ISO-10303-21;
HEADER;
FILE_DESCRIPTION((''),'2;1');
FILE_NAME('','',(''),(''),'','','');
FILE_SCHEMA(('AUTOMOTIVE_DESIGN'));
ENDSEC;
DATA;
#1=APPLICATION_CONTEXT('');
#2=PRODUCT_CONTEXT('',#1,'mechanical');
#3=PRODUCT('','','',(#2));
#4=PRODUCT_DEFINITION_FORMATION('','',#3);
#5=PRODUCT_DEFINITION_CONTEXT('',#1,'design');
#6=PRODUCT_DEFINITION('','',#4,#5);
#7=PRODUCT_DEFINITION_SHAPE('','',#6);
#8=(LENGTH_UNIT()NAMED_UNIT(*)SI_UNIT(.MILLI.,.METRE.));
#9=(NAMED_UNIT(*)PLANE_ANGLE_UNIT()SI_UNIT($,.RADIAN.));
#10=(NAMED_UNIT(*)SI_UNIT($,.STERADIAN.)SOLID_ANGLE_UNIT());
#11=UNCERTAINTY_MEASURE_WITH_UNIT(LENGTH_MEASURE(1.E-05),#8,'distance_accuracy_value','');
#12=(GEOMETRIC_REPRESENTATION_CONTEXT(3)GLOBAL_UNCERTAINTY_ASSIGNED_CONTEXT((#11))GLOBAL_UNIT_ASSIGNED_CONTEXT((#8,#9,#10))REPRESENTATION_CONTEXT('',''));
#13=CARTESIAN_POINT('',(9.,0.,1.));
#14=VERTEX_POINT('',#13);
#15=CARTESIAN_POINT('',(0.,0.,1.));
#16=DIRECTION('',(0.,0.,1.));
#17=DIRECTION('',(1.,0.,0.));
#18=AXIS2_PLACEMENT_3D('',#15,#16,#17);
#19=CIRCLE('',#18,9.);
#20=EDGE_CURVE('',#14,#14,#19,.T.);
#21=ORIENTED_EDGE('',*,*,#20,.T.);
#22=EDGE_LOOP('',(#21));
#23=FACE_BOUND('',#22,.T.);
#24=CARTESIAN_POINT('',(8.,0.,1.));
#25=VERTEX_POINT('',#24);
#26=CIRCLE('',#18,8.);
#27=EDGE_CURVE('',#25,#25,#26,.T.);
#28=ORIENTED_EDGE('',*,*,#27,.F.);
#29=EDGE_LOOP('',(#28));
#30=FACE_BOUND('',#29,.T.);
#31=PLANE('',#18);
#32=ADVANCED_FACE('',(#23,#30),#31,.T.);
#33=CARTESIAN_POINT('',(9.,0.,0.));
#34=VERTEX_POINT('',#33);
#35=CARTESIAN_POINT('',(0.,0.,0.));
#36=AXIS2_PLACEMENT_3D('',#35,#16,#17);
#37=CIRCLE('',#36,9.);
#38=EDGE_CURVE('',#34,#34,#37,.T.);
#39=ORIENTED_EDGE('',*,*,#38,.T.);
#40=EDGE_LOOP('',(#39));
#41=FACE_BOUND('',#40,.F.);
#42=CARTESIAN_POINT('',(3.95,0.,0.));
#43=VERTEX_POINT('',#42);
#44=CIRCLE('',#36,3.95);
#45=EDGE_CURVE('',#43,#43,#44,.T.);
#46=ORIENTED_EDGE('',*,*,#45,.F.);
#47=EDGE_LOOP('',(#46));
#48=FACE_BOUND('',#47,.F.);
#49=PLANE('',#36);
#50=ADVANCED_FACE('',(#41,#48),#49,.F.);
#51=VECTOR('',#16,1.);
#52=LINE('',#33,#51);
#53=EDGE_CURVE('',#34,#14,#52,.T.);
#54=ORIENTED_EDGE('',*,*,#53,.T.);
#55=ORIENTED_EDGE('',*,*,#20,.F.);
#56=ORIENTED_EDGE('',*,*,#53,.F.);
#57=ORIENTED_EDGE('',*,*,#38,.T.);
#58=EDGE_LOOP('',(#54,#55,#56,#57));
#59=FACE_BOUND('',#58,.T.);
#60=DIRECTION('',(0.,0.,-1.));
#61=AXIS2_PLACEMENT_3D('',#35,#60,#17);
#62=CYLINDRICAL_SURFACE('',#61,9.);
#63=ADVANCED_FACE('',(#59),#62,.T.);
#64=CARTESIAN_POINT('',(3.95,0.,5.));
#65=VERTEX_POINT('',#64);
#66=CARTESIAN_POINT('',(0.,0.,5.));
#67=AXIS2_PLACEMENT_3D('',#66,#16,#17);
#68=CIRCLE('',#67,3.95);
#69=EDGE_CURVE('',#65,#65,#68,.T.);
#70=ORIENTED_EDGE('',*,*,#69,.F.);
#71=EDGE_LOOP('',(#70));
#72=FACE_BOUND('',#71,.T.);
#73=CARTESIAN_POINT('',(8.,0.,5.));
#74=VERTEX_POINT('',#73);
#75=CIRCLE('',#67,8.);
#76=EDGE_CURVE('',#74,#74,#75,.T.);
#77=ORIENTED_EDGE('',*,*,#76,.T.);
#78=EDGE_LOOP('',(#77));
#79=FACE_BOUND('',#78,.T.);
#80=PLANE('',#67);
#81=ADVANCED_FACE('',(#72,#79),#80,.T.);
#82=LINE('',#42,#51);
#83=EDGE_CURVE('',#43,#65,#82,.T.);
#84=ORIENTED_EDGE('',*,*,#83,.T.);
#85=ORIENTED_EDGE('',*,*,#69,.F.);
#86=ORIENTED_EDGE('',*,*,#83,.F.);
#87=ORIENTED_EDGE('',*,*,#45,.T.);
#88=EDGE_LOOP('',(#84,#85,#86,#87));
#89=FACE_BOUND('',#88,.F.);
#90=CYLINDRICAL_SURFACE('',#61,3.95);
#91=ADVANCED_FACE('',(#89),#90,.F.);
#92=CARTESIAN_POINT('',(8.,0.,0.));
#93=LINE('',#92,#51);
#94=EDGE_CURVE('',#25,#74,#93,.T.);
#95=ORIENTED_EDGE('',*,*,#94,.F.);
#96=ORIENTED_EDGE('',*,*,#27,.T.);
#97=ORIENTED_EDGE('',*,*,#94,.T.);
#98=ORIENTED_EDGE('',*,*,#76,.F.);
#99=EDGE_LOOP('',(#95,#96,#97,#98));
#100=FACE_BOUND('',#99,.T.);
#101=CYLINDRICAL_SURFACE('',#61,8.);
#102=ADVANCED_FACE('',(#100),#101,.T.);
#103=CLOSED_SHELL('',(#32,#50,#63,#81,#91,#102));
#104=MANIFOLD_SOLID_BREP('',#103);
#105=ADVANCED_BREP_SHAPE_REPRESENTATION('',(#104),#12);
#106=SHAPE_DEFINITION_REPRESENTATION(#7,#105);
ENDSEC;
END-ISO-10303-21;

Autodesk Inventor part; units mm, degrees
ref_plane "YZ Plane" through (0, 0, 0) normal (1, 0, 0) x (0, 1, 0)
ref_plane "XZ Plane" through (0, 0, 0) normal (0, 1, 0) x (-1, 0, 0)
ref_plane "XY Plane" through (0, 0, 0) normal (0, 0, 1) x (1, 0, 0)
sketch "Sketch1" plane through (0, 0, 0) normal (0, 0, 1) x (1, 0, 0)
  circle A0 centre (0, 0) radius 3.95
  circle A1 centre (0, 0) radius 8
  circle A2 centre (0, 0) radius 9
  circle A3 centre (0, 0) radius 4.85
  dimension "d0" = 7.9
  dimension "d1" = 16
  dimension "d2" = 18
  dimension "d7" = 0.9
extrude "Extrusion1" add sketch "Sketch1" along normal blind 1 contours A2
extrude "Extrusion2" add sketch "Sketch1" along normal blind 5 contours A1 | A3
properties part number "16mmOD Belt Bearing Half"
